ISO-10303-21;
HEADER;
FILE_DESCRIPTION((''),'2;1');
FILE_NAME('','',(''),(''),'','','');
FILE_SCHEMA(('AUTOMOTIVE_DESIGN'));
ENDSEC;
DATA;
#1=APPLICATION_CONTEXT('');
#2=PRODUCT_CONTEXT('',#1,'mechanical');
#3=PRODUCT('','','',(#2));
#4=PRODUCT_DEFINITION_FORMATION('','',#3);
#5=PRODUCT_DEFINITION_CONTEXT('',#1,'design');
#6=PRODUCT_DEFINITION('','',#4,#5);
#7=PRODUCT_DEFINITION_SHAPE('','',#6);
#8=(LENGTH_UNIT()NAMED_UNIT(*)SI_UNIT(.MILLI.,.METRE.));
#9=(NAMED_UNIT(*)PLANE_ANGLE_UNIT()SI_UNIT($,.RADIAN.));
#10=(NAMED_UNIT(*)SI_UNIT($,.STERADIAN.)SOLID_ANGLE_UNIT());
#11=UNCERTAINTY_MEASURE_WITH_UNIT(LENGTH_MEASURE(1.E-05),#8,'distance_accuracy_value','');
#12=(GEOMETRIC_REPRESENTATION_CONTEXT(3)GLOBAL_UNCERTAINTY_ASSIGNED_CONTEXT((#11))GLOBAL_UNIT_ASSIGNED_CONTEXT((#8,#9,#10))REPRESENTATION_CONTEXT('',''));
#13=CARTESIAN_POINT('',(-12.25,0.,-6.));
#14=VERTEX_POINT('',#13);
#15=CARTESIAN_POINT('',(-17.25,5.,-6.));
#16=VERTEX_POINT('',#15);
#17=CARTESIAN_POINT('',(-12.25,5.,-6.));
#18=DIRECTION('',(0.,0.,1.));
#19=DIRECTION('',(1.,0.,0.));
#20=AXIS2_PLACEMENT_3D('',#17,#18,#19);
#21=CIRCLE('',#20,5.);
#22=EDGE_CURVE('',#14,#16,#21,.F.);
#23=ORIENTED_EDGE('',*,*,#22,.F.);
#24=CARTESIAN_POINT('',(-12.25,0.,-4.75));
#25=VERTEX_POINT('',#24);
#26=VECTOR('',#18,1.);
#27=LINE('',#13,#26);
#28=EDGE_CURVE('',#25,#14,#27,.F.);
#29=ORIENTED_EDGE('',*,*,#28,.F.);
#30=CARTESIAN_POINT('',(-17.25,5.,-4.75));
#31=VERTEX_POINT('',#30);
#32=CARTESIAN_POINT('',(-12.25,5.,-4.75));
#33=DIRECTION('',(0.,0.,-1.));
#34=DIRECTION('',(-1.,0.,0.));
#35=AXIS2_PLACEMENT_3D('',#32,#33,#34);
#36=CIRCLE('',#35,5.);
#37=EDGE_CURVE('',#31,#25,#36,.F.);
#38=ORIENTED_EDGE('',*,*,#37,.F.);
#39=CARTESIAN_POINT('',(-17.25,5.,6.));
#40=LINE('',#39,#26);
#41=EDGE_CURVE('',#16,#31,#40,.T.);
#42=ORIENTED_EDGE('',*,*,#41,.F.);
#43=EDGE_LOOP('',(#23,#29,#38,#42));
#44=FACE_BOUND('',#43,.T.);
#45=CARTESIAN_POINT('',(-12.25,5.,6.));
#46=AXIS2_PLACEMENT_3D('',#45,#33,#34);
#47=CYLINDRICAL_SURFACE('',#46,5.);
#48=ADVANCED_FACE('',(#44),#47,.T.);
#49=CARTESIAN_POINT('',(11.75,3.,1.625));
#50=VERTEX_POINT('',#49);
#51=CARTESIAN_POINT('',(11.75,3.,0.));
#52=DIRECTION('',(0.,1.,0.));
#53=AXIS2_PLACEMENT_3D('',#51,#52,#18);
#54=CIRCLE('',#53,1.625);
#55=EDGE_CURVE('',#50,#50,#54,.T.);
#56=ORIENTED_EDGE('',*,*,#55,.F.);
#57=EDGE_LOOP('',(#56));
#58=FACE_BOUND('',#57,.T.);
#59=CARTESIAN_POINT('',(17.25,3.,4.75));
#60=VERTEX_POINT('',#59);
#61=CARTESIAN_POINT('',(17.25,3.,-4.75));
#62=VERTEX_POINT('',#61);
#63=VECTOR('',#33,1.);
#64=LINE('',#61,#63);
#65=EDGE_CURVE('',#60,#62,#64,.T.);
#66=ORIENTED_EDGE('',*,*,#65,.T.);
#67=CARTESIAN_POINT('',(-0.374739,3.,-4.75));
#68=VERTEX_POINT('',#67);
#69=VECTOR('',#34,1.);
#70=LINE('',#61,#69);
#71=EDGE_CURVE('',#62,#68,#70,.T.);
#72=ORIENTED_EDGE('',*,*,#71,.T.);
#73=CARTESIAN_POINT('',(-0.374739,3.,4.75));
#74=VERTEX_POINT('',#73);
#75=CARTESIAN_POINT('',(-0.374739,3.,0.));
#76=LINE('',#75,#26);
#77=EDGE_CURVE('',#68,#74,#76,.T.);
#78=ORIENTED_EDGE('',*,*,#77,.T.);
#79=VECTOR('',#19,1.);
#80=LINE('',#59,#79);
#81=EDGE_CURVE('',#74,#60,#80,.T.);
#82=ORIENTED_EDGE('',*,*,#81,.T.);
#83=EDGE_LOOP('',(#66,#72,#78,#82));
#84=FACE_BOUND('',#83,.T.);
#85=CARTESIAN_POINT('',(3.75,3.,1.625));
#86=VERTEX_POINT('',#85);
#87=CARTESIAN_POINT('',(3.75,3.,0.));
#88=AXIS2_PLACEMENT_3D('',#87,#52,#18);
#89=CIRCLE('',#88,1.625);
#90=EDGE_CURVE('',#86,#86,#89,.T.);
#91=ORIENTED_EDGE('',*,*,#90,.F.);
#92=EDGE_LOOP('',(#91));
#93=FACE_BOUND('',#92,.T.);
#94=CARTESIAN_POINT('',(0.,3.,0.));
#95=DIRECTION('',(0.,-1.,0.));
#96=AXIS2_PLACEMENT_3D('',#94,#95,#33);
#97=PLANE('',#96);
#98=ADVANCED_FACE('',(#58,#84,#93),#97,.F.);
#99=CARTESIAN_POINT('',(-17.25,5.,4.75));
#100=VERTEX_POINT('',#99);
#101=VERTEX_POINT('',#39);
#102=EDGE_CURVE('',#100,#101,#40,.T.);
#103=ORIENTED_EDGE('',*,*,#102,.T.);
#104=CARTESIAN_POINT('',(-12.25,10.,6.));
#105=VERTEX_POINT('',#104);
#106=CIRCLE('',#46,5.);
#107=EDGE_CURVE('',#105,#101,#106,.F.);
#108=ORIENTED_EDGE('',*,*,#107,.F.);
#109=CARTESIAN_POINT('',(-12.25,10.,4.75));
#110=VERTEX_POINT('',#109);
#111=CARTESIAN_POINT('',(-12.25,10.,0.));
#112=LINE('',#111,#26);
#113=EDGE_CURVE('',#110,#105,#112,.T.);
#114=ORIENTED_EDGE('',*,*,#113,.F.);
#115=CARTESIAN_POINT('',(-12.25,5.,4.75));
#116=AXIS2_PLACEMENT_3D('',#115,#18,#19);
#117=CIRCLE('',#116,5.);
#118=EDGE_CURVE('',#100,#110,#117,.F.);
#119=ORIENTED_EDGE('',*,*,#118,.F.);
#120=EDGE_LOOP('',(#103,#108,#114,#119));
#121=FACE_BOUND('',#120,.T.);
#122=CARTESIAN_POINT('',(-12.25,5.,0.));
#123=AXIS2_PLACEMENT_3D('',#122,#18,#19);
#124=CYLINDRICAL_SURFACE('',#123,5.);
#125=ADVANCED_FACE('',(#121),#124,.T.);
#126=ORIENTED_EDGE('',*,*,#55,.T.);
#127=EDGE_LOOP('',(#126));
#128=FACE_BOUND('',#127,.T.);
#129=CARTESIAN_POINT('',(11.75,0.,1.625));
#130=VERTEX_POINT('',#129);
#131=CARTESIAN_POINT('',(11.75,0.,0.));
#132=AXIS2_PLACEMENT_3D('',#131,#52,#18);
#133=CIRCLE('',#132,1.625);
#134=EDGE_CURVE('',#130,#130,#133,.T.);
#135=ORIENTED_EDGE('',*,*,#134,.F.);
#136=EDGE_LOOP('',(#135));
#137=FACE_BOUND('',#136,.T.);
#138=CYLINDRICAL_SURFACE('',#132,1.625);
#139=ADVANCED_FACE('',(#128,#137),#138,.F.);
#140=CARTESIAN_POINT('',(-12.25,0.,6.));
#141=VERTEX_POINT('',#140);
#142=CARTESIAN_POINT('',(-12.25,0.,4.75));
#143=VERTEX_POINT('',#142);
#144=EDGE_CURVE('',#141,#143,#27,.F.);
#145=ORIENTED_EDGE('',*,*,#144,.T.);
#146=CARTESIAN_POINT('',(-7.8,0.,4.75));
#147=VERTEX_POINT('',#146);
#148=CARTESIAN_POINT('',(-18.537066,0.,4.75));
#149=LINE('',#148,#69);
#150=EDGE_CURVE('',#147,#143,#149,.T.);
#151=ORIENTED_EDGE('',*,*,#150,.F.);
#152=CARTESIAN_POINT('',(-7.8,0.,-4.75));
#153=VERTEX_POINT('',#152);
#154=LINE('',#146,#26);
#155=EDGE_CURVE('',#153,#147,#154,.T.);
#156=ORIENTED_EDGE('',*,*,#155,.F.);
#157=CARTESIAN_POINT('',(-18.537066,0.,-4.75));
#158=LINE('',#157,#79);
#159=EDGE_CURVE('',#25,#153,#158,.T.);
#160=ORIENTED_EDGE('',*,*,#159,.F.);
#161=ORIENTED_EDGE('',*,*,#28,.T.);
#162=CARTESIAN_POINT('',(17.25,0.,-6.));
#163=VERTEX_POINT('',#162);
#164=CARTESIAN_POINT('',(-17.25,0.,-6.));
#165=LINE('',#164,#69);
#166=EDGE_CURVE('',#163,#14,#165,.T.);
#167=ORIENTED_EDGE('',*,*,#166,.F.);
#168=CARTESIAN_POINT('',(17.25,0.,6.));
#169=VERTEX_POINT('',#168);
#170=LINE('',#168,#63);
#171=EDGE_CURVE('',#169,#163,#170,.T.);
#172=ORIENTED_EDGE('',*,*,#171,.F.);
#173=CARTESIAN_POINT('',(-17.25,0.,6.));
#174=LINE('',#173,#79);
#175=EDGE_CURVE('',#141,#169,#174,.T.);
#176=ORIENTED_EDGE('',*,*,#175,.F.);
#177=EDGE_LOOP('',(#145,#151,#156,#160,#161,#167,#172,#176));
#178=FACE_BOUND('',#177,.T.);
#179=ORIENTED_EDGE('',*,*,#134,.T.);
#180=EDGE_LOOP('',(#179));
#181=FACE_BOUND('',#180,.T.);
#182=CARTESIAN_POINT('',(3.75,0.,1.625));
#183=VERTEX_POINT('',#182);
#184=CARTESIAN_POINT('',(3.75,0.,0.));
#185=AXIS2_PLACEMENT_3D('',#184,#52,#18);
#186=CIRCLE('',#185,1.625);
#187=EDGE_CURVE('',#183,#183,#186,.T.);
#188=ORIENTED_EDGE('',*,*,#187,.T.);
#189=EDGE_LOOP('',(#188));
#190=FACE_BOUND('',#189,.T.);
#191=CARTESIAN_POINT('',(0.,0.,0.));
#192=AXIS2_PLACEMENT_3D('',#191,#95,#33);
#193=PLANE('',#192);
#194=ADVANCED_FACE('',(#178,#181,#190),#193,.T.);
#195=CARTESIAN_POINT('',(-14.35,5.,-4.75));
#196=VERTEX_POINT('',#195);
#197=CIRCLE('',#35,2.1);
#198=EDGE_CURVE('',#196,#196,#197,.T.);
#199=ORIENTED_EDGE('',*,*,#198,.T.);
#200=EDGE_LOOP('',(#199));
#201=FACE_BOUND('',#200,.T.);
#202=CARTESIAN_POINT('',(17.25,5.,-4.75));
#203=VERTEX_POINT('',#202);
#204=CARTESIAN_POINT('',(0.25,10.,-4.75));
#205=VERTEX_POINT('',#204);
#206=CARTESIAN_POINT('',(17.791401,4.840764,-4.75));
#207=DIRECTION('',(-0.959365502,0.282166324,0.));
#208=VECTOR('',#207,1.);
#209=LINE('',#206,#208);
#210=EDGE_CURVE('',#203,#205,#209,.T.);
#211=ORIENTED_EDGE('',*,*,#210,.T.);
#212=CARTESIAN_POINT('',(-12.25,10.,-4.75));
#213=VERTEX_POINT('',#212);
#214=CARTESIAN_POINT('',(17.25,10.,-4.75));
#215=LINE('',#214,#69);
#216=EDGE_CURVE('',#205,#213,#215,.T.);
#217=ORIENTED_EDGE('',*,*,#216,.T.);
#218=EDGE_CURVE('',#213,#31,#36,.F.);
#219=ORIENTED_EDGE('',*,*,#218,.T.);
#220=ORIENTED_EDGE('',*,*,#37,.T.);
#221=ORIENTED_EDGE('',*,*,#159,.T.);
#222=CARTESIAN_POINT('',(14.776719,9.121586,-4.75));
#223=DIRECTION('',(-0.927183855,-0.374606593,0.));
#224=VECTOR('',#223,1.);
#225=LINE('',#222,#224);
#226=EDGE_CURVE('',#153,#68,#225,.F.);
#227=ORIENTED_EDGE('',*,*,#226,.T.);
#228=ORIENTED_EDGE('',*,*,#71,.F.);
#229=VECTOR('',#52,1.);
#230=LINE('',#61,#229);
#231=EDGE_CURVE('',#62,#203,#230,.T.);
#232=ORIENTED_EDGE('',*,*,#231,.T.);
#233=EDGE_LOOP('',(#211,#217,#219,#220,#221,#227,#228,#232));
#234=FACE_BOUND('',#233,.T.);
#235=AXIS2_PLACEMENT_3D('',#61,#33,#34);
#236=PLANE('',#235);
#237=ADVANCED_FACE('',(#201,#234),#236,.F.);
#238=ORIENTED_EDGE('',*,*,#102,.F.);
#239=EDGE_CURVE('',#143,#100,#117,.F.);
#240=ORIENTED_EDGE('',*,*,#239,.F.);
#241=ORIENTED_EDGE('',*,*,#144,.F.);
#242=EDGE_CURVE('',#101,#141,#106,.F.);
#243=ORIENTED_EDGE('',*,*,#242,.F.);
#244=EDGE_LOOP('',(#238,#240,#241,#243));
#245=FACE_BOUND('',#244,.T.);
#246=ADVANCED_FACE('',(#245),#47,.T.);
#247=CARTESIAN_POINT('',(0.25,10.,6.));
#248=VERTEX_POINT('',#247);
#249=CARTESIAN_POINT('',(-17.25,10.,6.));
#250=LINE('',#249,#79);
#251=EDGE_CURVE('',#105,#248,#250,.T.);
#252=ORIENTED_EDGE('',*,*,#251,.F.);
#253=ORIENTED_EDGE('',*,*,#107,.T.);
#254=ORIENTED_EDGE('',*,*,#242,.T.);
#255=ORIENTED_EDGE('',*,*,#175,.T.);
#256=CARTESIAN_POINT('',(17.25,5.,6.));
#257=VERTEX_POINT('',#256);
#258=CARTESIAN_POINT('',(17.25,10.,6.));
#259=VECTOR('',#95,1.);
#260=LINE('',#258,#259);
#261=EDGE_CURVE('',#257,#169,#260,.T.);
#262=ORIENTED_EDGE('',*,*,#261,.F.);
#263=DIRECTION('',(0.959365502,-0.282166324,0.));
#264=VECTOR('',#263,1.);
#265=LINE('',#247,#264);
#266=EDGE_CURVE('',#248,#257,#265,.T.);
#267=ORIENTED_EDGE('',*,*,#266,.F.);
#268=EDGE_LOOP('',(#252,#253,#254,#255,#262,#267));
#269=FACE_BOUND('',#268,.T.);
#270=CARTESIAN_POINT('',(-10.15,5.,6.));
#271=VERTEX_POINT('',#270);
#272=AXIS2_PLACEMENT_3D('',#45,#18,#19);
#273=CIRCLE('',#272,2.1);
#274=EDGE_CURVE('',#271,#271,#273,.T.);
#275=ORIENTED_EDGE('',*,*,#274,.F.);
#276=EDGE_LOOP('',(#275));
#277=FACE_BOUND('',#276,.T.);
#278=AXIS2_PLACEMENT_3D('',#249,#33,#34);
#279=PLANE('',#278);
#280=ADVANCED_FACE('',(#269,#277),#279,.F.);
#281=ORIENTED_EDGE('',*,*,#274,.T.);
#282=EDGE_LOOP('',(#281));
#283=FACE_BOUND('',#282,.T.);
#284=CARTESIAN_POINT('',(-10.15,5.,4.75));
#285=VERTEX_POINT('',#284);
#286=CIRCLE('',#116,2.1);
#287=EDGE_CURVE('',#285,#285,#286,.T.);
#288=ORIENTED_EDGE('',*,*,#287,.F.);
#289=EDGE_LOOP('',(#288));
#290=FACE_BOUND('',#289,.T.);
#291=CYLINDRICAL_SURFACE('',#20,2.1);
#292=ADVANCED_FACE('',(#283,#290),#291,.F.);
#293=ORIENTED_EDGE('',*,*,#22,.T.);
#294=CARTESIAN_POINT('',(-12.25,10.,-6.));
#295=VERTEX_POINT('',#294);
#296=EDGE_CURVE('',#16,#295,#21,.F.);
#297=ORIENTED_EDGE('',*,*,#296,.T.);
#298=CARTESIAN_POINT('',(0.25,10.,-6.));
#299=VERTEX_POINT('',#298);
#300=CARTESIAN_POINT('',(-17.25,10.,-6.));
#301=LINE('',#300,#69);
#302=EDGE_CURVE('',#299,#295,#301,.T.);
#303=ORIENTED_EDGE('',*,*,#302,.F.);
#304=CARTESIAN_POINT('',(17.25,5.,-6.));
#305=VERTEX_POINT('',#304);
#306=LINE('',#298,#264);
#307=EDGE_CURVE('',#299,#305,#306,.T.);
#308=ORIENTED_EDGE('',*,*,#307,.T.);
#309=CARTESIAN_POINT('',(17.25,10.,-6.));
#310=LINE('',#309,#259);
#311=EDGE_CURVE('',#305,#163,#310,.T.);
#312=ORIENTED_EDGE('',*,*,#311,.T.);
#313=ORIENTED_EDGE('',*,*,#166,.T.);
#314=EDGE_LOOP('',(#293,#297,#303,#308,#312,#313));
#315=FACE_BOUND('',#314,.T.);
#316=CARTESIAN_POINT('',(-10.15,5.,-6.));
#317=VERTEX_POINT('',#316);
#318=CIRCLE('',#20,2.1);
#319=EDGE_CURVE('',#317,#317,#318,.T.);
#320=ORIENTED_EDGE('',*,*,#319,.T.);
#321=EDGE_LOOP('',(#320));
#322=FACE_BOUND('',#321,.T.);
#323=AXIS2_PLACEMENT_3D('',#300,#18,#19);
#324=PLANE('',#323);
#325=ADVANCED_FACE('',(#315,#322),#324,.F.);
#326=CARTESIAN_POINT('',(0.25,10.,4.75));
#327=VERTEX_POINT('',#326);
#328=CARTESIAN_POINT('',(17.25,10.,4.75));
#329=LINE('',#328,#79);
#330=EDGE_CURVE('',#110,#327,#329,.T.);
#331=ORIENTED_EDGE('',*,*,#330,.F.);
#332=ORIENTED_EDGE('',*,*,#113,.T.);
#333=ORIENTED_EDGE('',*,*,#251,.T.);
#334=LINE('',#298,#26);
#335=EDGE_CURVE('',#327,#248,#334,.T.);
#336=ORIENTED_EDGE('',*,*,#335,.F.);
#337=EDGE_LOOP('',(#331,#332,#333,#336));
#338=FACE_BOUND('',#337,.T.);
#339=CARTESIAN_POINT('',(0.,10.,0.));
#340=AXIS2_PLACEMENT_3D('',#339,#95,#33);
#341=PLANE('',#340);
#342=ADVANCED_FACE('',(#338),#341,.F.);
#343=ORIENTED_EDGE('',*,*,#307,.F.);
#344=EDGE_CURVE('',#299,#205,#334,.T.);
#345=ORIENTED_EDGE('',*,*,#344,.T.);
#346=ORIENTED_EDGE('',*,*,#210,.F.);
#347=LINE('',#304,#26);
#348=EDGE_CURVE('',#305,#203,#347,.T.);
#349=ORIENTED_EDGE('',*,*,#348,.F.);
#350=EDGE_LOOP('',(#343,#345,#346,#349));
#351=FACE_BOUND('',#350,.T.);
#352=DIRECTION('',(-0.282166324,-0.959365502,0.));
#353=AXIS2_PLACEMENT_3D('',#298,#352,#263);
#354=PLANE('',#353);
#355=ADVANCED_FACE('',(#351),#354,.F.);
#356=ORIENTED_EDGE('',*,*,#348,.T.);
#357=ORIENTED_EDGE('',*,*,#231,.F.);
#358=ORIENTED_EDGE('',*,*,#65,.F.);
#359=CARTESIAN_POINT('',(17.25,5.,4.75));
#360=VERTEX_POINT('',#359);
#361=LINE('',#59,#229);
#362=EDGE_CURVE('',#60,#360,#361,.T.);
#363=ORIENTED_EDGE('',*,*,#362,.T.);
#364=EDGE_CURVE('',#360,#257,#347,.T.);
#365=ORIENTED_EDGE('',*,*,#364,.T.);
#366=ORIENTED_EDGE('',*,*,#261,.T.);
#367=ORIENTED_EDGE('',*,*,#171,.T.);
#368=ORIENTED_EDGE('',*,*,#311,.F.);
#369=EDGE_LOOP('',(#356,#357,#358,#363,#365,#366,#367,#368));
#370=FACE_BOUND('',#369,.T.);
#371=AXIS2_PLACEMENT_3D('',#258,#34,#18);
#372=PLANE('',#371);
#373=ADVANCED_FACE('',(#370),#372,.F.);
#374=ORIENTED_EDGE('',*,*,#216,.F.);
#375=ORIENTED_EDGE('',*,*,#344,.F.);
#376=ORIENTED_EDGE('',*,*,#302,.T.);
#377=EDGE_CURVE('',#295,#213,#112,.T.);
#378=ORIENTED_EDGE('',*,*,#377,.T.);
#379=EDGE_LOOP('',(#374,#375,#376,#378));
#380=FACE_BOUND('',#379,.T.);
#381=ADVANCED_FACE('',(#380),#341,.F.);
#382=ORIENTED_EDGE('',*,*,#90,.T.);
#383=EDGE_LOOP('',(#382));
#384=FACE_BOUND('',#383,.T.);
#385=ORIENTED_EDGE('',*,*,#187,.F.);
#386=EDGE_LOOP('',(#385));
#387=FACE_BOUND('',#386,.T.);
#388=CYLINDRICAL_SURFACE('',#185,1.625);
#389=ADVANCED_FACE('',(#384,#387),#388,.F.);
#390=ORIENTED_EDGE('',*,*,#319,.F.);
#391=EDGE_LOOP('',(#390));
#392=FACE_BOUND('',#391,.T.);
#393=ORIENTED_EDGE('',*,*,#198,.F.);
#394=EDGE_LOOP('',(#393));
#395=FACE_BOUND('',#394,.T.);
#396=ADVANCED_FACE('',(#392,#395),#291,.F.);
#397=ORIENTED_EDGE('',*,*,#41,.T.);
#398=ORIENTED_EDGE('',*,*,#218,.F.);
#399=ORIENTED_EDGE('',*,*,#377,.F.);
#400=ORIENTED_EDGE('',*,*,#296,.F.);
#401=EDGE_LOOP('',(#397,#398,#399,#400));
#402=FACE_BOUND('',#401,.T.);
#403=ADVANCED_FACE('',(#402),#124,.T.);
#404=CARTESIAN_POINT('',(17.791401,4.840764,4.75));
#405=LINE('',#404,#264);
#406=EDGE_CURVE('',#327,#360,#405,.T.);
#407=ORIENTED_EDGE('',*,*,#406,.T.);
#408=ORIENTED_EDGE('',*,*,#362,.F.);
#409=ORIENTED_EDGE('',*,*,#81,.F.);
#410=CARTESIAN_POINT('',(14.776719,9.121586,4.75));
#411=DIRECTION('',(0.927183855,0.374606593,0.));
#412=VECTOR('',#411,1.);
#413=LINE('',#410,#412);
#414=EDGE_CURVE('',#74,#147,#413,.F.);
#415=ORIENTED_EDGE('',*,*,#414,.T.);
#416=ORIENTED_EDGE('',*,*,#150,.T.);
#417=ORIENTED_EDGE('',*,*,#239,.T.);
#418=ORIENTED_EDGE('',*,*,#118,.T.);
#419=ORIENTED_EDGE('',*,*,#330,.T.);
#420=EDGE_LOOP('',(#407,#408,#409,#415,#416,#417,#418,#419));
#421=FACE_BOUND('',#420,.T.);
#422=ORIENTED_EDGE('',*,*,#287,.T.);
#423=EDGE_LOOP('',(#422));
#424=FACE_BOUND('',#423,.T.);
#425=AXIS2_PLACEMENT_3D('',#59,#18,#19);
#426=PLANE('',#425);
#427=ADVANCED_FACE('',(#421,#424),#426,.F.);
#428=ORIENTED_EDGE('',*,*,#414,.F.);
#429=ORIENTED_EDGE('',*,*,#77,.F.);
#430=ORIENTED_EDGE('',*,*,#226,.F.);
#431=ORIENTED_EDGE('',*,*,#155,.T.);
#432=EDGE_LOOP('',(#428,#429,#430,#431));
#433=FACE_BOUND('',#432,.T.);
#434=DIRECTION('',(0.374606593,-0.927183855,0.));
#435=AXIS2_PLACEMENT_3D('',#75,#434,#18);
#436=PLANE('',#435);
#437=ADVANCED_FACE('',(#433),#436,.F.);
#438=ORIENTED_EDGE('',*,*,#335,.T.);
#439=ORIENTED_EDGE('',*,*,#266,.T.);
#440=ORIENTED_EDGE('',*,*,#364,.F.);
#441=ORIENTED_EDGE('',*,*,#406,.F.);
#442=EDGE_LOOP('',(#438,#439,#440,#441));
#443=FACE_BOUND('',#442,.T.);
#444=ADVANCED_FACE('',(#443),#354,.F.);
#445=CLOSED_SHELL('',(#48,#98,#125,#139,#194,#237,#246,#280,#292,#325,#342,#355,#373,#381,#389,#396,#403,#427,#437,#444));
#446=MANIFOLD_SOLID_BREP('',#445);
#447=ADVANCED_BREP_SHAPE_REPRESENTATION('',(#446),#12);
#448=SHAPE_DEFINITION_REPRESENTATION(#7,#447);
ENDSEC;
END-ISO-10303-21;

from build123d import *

# Parameters (mm, degrees)
CROQUIS1_W              = 34.5
CROQUIS1_H              = 12
SALIENTE_EXTRUIR1_DEPTH = 10
REDONDEO1_R             = 5
CROQUIS8_W              = 34.5
CROQUIS8_H              = 9.5
CORTAR_EXTRUIR6_DEPTH   = 7
CROQUIS9_W              = 10.737065785
CROQUIS9_H              = 9.5
CORTAR_EXTRUIR7_DEPTH   = 21.822163672
CHAFL_N1_SIZE           = 3
CHAFL_N1_SIZE_2         = 7.42526056
CORTAR_EXTRUIR8_DEPTH   = 24.27149544
CROQUIS11_R             = 2.1
CORTAR_EXTRUIR9_DEPTH   = 24.27149544
CROQUIS12_R             = 1.625
CORTAR_EXTRUIR10_DEPTH  = 20.559204994


# Some blends are built 0.0001 mm under size
with BuildPart() as part:
    # Croquis1 → Saliente-Extruir1 (new body)
    with BuildSketch(Plane(origin=(0, 0, 0), x_dir=(1, 0, 0), z_dir=(0, 1, 0))):
        Rectangle(CROQUIS1_W, CROQUIS1_H)
    extrude(amount=SALIENTE_EXTRUIR1_DEPTH)

    # Redondeo1
    redondeo1_edges = [part.edges().sort_by_distance(p)[0] for p in [
        (-17.25, 10, 0),
        (-17.25, 0, 0),
    ]]
    fillet(redondeo1_edges, radius=REDONDEO1_R - 0.0001)  # a hair under: the kernel refuses the full size

    # Croquis8 → Cortar-Extruir6 (cut)
    with BuildSketch(Plane(origin=(0, 10, 0), x_dir=(1, 0, 0), z_dir=(0, 1, 0))):
        Rectangle(CROQUIS8_W, CROQUIS8_H)
    extrude(amount=-CORTAR_EXTRUIR6_DEPTH, mode=Mode.SUBTRACT)

    # Croquis9 → Cortar-Extruir7 (cut, through all)
    with BuildSketch(Plane.XZ):
        with Locations((-13.168532893, 0)):
            Rectangle(CROQUIS9_W, CROQUIS9_H)
    extrude(amount=-CORTAR_EXTRUIR7_DEPTH, mode=Mode.SUBTRACT)

    # Chaflán1
    # the kernel refuses this chamfer: 7.42526056, 3 mm, written as the material it takes off along each edge
    with BuildSketch(Plane(origin=(-7.8, 3, -4.75), x_dir=(-0.08816706473193606, -0.9961057015681392, 0), z_dir=(0, 0, 1))) as chafl_n1_piece_1:
        Polygon((CHAFL_N1_SIZE * 0.996105701568, CHAFL_N1_SIZE * 0.0881670647319), (-CHAFL_N1_SIZE_2 * 0.0881670647349, CHAFL_N1_SIZE_2 * 0.996105701602), (0, 0), align=None)
    extrude(amount=9.5, mode=Mode.SUBTRACT)

    # Croquis10 → Cortar-Extruir8 (cut, through all)
    with BuildSketch(Plane.XY.offset(6)):
        Polygon((0.25, 10), (17.25, 5), (17.25, 10), align=None)
    extrude(amount=-CORTAR_EXTRUIR8_DEPTH, mode=Mode.SUBTRACT)

    # Croquis11 → Cortar-Extruir9 (cut, through all)
    with BuildSketch(Plane.XY.offset(6)):
        with Locations((-12.25, 5)):
            Circle(CROQUIS11_R)
    extrude(amount=-CORTAR_EXTRUIR9_DEPTH, mode=Mode.SUBTRACT)

    # Croquis12 → Cortar-Extruir10 (cut, through all)
    with BuildSketch(Plane(origin=(0, 3, 0), x_dir=(1, 0, 0), z_dir=(0, 1, 0))):
        with Locations(Location((3.75, 0, 0), (0, 0, 270))):
            Circle(CROQUIS12_R)
        with Locations(Location((11.75, 0, 0), (0, 0, 270))):
            Circle(CROQUIS12_R)
    extrude(amount=-CORTAR_EXTRUIR10_DEPTH, mode=Mode.SUBTRACT)


solid = part.part
